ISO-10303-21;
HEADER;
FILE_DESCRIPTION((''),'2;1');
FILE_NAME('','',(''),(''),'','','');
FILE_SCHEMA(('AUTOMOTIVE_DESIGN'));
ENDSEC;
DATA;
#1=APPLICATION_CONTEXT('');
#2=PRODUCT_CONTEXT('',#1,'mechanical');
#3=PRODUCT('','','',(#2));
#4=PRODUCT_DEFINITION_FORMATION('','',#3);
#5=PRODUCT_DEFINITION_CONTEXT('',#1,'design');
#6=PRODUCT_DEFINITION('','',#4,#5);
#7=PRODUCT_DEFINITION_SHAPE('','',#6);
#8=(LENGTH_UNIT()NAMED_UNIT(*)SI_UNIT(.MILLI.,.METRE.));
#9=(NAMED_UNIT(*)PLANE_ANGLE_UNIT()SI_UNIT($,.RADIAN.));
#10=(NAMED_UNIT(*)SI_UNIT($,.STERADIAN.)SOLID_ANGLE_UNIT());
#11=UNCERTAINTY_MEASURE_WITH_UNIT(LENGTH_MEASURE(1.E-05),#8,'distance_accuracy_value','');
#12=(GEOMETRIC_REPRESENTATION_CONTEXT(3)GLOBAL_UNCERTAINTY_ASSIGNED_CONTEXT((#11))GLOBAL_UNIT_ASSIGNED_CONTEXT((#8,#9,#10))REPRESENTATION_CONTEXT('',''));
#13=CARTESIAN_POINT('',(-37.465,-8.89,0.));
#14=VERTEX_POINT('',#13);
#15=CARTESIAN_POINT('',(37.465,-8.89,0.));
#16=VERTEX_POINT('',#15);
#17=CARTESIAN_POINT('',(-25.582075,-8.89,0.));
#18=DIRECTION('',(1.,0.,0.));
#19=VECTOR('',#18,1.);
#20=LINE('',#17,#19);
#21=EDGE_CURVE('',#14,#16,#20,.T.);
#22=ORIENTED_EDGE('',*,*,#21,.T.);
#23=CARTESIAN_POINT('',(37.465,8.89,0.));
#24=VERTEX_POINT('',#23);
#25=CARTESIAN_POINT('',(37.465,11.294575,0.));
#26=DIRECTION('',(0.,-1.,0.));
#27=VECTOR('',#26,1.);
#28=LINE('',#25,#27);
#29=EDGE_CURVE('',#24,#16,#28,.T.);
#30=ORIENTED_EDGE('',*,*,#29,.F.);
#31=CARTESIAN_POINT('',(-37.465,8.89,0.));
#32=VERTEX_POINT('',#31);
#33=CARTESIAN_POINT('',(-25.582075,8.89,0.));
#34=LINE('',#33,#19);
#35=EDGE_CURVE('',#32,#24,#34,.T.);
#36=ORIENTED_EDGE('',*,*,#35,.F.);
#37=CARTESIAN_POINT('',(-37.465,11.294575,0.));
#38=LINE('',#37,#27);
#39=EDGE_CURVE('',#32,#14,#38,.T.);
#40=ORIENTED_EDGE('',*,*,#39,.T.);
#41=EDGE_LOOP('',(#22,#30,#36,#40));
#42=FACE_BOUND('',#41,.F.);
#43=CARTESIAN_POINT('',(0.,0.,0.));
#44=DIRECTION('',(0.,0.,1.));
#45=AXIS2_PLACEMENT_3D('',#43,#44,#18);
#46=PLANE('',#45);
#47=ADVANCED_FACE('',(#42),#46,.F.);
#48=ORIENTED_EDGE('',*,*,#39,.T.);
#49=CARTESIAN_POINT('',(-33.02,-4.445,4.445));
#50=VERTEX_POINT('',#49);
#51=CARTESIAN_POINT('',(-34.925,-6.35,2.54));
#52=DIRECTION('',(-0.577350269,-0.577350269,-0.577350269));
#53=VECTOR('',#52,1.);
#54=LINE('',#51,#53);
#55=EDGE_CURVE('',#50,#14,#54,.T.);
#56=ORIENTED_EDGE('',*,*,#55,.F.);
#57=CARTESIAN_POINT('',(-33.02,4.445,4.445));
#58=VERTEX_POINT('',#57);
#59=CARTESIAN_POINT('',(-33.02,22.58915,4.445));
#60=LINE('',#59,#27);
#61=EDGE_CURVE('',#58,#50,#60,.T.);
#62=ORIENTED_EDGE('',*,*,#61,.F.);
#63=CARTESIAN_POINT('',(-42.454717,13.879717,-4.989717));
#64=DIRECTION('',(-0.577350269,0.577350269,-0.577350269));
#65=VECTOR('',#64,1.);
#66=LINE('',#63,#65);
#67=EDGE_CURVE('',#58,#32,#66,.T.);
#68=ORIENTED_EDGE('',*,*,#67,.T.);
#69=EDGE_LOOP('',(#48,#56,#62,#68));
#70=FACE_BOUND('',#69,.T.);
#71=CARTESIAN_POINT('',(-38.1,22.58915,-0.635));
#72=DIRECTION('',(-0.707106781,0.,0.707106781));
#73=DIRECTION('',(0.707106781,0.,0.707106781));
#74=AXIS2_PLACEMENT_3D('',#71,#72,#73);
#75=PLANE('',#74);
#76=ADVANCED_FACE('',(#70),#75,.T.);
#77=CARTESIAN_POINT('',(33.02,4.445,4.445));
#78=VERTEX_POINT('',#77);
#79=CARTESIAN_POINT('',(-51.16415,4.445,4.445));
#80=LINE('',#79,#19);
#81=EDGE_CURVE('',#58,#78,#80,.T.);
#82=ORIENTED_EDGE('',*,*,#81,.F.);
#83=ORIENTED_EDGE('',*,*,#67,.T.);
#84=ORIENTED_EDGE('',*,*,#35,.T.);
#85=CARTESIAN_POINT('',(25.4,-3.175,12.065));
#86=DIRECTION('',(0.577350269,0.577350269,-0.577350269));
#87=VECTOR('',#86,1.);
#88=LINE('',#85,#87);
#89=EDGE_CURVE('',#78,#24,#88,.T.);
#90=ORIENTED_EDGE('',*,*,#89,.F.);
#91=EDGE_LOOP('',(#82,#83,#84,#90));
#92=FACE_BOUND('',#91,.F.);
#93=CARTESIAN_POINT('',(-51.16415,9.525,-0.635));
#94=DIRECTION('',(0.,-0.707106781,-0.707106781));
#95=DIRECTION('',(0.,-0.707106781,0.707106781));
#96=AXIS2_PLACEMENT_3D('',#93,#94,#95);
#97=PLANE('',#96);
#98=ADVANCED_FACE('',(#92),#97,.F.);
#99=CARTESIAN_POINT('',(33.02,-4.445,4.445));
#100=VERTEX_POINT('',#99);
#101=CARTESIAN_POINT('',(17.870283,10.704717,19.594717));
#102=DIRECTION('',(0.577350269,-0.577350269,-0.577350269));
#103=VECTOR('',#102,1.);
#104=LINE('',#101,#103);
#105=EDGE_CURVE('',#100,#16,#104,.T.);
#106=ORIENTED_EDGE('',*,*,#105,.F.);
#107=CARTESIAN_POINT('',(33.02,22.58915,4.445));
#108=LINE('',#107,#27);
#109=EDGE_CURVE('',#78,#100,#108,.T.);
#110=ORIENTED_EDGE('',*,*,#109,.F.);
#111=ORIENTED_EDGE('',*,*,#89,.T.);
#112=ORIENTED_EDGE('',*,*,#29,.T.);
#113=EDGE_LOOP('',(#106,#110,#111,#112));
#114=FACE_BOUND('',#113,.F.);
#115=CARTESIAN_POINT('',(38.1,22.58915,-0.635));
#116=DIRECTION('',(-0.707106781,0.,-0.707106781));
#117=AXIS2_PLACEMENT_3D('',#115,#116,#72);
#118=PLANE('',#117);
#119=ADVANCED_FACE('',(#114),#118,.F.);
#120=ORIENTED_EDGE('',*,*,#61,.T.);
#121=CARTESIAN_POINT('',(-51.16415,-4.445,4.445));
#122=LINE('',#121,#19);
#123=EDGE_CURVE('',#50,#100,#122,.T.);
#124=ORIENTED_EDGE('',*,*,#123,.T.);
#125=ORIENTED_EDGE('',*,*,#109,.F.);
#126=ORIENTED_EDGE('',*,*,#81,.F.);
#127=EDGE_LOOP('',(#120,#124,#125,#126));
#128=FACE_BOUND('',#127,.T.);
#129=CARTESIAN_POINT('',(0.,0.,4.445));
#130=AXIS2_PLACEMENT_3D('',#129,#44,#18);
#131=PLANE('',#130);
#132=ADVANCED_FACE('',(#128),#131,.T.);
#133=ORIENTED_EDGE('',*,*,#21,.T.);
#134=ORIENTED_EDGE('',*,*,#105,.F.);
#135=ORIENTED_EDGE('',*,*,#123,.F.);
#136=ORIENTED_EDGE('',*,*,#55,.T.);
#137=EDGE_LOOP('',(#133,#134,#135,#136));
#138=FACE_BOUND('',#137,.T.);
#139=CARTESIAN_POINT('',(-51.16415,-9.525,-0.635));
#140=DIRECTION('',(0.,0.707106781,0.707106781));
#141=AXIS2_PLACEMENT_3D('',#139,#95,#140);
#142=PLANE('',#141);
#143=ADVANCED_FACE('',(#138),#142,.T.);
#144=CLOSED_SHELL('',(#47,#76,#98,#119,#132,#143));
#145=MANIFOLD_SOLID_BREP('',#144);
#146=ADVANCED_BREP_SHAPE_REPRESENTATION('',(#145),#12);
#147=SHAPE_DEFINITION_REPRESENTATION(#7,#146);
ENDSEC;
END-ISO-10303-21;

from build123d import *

# Parameters (mm, degrees)
F0_W        = 76.2
F0_H        = 19.05
F1_DEPTH    = 4.445
F3_T1_DEPTH = 102.3282991577
F3_T3_DEPTH = 45.1782991577


# Not quite as in the source:
# - a fillet or chamfer that OpenCascade refuses, or shapes differently, is made with other operations: its cross-section is extruded or revolved along the edge and cut away or added
# - a feature names something its author has since deleted; it is built from what else it names


with BuildPart() as f1:
    # F0 (on Top) → F1 (new body)
    with BuildSketch(Plane.XY):
        Rectangle(F0_W, F0_H)
    extrude(amount=F1_DEPTH)

    # F3: chamfer of 5.08 on 4 edges, made by hand

    # F3_s2 → F3_t1 (cut)
    with BuildSketch(Plane.YZ.offset(-51.1641495789)):
        Polygon((-9.525, -0.635), (-4.445, 4.445), (-9.525, 4.445), align=None)
        Polygon((9.525, -0.635), (4.445, 4.445), (9.525, 4.445), align=None)
    extrude(amount=F3_T1_DEPTH, mode=Mode.SUBTRACT)

    # F3_s4 → F3_t3 (cut)
    with BuildSketch(Plane.XZ.offset(-22.5891495789)):
        Polygon((-38.1, -0.635), (-33.02, 4.445), (-38.1, 4.445), align=None)
        Polygon((38.1, -0.635), (33.02, 4.445), (38.1, 4.445), align=None)
    extrude(amount=F3_T3_DEPTH, mode=Mode.SUBTRACT)


solid = f1.part
